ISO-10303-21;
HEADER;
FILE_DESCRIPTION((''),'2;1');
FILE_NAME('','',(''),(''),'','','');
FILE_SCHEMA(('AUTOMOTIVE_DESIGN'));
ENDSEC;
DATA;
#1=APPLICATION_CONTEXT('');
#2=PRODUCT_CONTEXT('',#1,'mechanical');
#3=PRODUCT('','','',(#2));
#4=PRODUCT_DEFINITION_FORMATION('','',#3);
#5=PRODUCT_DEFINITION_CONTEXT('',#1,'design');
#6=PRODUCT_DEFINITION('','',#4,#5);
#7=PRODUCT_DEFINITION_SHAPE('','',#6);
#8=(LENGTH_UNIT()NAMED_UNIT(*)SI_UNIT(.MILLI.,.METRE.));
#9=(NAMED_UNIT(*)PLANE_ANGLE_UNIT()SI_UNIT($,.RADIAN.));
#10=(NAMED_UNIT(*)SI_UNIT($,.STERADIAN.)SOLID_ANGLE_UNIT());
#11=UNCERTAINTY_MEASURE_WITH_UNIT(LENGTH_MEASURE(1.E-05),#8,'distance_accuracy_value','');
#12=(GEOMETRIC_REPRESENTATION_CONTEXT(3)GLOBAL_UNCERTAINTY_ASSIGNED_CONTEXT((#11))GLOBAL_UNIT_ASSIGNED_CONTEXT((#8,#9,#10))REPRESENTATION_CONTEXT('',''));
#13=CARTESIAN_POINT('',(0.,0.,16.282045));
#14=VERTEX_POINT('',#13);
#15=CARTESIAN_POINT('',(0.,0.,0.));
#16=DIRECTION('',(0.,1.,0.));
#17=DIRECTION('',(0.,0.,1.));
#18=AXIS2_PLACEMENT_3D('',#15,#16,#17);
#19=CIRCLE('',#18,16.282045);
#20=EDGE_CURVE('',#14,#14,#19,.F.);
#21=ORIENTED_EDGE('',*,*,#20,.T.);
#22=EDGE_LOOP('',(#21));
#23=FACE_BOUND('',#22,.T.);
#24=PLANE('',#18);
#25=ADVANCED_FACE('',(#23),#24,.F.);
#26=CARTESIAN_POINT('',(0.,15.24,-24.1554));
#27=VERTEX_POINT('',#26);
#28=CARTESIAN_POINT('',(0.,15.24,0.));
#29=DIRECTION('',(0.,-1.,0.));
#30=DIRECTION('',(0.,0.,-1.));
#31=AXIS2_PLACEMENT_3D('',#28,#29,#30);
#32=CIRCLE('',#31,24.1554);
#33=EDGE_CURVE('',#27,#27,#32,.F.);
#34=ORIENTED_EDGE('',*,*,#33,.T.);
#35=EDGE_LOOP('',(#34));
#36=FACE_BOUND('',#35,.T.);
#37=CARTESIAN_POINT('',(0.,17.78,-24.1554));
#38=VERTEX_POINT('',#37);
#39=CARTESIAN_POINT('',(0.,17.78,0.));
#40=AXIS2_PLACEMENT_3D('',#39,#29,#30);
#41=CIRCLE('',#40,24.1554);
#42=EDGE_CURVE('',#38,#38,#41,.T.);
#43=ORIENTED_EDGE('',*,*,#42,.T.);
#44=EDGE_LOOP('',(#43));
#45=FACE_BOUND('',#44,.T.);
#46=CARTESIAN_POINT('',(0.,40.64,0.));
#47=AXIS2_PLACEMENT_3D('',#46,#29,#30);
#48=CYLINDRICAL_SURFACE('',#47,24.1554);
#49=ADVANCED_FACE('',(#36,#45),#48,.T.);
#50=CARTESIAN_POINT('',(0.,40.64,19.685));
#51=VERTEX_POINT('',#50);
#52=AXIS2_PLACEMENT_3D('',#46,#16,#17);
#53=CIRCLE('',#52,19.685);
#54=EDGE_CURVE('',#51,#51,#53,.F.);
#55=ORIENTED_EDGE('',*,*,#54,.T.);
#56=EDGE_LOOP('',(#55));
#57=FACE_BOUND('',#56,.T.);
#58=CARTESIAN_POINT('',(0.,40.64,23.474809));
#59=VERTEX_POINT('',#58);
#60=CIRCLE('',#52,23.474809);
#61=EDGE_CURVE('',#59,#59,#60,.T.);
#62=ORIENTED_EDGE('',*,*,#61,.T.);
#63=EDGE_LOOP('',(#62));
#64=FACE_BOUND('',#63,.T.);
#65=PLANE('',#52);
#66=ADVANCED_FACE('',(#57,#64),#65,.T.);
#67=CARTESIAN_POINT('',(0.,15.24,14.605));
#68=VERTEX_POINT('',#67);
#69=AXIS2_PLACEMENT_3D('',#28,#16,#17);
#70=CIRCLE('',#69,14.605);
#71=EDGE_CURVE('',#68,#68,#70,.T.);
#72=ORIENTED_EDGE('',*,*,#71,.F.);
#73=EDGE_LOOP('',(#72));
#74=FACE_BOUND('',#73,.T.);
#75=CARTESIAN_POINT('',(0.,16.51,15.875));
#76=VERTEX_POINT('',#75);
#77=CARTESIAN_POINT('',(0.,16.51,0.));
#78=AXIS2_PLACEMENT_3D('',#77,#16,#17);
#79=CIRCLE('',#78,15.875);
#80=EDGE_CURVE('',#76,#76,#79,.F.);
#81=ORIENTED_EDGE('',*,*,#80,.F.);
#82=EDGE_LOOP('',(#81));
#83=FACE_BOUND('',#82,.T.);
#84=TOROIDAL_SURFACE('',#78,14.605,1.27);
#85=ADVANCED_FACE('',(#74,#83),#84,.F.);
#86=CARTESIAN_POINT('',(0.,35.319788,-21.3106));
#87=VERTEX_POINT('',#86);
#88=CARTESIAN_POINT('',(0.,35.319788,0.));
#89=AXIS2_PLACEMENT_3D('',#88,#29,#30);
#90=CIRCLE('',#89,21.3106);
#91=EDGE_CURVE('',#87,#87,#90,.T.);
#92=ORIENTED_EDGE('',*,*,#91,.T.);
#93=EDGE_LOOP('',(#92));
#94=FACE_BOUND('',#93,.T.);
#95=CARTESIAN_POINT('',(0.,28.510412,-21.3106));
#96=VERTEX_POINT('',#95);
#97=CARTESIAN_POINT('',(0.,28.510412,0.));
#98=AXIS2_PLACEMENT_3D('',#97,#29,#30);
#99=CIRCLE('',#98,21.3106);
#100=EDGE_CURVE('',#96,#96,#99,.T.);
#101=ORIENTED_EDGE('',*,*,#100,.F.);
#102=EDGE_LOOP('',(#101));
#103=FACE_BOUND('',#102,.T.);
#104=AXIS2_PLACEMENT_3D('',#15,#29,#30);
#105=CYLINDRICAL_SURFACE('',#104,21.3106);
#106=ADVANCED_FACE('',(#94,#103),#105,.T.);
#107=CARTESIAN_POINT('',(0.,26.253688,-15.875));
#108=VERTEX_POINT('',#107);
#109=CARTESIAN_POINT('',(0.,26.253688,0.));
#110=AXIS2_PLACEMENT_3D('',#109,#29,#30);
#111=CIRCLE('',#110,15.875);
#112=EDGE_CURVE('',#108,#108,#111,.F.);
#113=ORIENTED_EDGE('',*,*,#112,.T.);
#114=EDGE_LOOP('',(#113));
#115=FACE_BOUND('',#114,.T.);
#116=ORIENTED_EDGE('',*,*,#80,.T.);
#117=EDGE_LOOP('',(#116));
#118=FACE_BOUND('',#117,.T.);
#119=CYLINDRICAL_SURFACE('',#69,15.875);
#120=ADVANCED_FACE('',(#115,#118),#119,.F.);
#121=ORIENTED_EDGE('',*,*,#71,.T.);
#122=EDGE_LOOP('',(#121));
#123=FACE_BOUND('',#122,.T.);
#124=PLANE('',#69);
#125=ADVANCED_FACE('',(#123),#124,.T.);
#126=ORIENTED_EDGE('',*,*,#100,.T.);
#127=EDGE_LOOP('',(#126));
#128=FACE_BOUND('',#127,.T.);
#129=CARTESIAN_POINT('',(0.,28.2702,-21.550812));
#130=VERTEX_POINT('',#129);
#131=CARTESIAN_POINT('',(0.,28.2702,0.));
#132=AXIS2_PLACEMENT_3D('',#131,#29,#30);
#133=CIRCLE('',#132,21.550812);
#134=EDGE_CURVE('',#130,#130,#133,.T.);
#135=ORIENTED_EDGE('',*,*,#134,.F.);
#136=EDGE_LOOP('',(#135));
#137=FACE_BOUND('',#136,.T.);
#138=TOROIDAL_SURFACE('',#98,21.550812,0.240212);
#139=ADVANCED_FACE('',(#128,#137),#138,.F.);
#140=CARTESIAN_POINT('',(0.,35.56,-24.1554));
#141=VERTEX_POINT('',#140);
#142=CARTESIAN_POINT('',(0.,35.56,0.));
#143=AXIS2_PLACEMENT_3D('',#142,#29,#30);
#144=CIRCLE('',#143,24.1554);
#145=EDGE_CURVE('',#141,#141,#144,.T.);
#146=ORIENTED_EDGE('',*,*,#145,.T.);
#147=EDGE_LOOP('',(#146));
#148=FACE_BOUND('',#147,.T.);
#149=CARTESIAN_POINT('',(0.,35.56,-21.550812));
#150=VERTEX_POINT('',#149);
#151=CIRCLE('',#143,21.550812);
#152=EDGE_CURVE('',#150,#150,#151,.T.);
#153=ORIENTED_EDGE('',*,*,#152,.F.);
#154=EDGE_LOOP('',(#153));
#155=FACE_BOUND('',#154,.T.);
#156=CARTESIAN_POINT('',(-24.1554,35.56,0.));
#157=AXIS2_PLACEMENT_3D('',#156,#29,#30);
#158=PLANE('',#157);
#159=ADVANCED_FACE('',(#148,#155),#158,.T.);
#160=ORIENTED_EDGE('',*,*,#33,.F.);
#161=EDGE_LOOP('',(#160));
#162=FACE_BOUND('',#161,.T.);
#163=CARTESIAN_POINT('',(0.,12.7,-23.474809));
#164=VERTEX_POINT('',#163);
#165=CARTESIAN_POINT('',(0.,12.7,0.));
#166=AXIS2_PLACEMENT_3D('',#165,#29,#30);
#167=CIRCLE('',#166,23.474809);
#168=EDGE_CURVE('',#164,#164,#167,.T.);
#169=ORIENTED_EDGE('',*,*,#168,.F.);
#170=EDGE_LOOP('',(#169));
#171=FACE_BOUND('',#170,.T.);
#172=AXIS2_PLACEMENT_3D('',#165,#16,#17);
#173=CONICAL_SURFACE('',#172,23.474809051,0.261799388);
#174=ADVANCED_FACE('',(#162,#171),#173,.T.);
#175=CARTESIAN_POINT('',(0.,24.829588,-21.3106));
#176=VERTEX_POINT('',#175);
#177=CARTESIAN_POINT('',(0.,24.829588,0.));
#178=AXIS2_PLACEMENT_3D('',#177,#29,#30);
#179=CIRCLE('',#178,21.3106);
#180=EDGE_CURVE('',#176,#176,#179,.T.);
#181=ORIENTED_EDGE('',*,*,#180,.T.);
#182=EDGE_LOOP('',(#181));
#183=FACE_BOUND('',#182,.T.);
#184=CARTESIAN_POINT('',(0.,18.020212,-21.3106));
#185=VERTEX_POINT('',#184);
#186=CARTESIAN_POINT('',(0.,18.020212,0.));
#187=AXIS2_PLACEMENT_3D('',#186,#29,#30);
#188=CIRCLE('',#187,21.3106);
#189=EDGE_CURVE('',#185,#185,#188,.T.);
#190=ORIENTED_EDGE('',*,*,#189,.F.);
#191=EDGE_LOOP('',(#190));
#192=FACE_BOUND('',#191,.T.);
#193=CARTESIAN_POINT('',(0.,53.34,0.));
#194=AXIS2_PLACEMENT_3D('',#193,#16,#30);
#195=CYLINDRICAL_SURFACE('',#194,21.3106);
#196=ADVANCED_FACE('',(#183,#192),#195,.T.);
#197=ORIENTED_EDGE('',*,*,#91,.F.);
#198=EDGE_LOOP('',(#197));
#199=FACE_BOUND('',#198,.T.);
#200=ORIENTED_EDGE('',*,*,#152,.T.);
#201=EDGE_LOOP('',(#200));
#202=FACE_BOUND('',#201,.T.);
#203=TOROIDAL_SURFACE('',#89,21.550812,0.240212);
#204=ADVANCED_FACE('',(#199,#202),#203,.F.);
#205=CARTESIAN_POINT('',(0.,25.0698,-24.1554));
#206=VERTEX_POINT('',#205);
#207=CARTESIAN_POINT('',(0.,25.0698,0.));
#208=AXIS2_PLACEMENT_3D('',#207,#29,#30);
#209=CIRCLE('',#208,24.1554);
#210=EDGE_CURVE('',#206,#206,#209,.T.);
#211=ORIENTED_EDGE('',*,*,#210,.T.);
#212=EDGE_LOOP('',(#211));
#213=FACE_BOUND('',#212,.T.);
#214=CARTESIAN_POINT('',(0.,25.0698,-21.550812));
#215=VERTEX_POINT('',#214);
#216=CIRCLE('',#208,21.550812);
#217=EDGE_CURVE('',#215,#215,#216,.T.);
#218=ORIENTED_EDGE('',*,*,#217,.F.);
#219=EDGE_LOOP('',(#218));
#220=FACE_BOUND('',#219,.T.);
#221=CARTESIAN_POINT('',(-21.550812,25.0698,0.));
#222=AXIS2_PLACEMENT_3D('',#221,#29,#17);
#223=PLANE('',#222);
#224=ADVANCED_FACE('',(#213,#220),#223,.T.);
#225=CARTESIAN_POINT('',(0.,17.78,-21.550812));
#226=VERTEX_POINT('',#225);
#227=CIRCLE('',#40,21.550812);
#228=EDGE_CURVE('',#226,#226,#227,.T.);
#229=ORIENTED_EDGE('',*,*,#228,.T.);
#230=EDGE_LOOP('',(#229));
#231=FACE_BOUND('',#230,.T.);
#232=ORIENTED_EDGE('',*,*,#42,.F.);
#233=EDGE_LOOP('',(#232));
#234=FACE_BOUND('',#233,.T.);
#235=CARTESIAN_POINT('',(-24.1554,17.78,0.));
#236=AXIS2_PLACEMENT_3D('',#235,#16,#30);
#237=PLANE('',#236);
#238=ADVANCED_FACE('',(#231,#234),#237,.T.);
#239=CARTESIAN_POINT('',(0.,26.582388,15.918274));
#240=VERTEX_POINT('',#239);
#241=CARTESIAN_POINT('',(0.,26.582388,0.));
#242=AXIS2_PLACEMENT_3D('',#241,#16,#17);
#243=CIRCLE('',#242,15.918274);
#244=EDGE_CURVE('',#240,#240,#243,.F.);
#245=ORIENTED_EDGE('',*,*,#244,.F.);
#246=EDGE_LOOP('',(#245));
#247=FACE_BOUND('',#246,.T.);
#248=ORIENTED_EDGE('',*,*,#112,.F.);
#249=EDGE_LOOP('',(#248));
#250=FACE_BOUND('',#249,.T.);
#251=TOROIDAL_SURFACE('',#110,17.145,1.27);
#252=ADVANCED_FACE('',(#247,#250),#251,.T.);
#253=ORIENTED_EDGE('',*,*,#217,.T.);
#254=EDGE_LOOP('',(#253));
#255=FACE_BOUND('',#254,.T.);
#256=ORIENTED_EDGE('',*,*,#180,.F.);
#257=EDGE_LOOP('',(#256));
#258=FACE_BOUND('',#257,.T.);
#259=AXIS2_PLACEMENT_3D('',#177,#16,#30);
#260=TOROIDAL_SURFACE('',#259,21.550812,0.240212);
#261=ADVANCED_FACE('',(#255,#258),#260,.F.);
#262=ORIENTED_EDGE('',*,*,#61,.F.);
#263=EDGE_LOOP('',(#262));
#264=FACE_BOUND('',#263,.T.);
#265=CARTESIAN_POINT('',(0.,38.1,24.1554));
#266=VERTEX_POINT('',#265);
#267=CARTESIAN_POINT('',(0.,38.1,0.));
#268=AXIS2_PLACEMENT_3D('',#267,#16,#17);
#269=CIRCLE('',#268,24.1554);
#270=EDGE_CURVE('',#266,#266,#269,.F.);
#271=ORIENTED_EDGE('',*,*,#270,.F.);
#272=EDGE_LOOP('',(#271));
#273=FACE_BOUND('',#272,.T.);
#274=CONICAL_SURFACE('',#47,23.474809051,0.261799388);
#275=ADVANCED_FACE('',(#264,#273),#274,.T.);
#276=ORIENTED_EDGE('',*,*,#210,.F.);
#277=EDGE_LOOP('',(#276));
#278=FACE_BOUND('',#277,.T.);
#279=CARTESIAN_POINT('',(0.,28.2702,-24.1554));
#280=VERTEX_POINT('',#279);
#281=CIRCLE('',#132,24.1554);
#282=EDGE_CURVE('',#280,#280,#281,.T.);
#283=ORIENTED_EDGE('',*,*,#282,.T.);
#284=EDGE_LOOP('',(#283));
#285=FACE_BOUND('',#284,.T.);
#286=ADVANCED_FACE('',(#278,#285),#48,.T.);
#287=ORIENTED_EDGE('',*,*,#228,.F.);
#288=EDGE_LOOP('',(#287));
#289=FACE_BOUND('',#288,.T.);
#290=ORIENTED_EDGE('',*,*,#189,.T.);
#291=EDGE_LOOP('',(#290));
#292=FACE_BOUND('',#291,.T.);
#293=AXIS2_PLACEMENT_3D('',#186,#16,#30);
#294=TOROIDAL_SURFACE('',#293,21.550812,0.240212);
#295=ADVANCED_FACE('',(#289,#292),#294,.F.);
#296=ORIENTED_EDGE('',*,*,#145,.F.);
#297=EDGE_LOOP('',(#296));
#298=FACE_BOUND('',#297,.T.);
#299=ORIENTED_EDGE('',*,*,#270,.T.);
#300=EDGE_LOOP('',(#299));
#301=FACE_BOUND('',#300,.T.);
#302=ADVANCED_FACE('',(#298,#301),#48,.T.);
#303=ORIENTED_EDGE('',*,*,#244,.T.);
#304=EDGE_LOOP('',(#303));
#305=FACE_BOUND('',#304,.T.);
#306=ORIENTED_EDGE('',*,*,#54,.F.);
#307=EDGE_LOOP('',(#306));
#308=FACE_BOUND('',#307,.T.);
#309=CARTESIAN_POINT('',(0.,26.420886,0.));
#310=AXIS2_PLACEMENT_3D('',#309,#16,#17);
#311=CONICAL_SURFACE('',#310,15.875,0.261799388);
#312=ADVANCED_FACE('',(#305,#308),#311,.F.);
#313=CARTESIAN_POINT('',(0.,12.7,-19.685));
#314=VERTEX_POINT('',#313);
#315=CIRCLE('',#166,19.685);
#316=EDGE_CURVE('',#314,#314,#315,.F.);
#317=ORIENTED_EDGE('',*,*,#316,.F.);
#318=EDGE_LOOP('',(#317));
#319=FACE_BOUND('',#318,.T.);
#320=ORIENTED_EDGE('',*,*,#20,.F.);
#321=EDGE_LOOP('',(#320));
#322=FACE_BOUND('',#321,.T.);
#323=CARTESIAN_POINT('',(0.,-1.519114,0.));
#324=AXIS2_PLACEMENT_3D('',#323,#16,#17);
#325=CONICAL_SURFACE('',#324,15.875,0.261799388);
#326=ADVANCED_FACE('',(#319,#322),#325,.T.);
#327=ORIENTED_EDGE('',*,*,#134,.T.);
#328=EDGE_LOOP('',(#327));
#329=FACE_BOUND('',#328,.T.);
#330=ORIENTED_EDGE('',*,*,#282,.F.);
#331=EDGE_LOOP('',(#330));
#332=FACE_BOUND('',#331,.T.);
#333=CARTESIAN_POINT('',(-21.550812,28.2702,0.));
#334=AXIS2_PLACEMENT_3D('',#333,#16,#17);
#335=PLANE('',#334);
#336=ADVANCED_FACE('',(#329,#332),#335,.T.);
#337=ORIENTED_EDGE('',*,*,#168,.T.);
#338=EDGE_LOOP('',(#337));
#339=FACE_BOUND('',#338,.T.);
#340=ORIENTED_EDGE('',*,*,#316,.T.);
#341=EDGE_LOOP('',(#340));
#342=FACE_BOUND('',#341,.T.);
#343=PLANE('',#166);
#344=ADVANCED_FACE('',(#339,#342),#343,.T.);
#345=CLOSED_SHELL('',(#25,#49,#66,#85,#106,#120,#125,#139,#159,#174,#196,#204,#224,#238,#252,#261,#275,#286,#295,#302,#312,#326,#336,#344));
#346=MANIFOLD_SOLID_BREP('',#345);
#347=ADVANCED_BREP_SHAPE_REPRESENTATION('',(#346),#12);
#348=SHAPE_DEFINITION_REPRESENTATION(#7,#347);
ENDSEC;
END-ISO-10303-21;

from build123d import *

# Parameters (mm, degrees)
SKETCH1_R                 = 24.1554
BODY_DEPTH                = 40.64
SKETCH2_R                 = 15.875
LIGHTENING_HOLE_DEPTH     = 25.4
INSTALL_CHAMFER_SIZE      = 2.54
INSTALL_CHAMFER_SIZE2     = 0.680590949
PROP_CHAMFER_SIZE         = 3.81
PROP_CHAMFER_SIZE2        = 14.219113577
SKETCH54_R                = 24.1554
SKETCH54_R_2              = 15.875
CONFORM_CUT_DEPTH         = 12.7
BOTTOM_PRESS_DRAFT_SIZE   = 3.81
BOTTOM_PRESS_DRAFT_SIZE_2 = 14.219113577
EDGE_BREAKS_R             = 1.27
INSTALL_CHAMFER_2_SIZE    = 2.54
INSTALL_CHAMFER_2_SIZE2   = 0.680590949


with BuildPart() as part:
    # Sketch1 → body (new body)
    with BuildSketch(Plane(origin=(0, 0, 0), x_dir=(1, 0, 0), z_dir=(0, 1, 0))):
        with Locations(Location((0, 0, 0), (0, 0, 270))):
            Circle(SKETCH1_R)
    extrude(amount=BODY_DEPTH)

    # Sketch2 → lightening hole (cut)
    with BuildSketch(Plane(origin=(0, 40.64, 0), x_dir=(1, 0, 0), z_dir=(0, 1, 0))):
        with Locations(Location((0, 0, 0), (0, 0, 270))):
            Circle(SKETCH2_R)
    extrude(amount=-LIGHTENING_HOLE_DEPTH, mode=Mode.SUBTRACT)

    # main-o-ring → o-ring-main (with backup rings) (revolve, cut)
    with BuildSketch(Plane.XY, mode=Mode.PRIVATE) as o_ring_main_with_backup_rings_sk:
        with BuildLine():
            Line((-24.1554, 35.56), (-24.1554, 28.2702))
            Line((-24.1554, 28.2702), (-21.550812385, 28.2702))
            ThreePointArc((-21.550812385, 28.2702), (-21.380956579, 28.340556579), (-21.3106, 28.510412385))
            Line((-21.3106, 28.510412385), (-21.3106, 35.319787615))
            ThreePointArc((-21.3106, 35.319787615), (-21.380956579, 35.489643421), (-21.550812385, 35.56))
            Line((-21.550812385, 35.56), (-24.1554, 35.56))
        make_face()
    o_ring_main_with_backup_rings = revolve(o_ring_main_with_backup_rings_sk.sketch.rotate(Axis((0, 0, 0), (0, 1, 0)), 270), axis=Axis((0, 0, 0), (0, 1, 0)), mode=Mode.SUBTRACT)

    # install-chamfer
    install_chamfer_edges = [part.edges().sort_by_distance(p)[0] for p in [
        (0, 40.64, -24.1554),
    ]]
    install_chamfer_side = [part.faces().sort_by_distance(p)[0] for p in [
        (0, 38.1, -24.1554),
    ]]
    chamfer(install_chamfer_edges, length=INSTALL_CHAMFER_SIZE, length2=INSTALL_CHAMFER_SIZE2, reference=install_chamfer_side[0])

    # prop-chamfer
    prop_chamfer_edges = [part.edges().sort_by_distance(p)[0] for p in [
        (0, 40.64, -15.875),
    ]]
    prop_chamfer_side = [part.faces().sort_by_distance(p)[0] for p in [
        (0, 40.64, -22.810841185),
    ]]
    chamfer(prop_chamfer_edges, length=PROP_CHAMFER_SIZE, length2=PROP_CHAMFER_SIZE2, reference=prop_chamfer_side[0])

    # Top-Bottom Symmetry: o-ring-main (with backup rings) across plane
    add(o_ring_main_with_backup_rings.mirror(Plane.ZX.offset(26.67)), mode=Mode.SUBTRACT)

    # Sketch54 → conform-cut (cut)
    with BuildSketch(Plane.XZ):
        with Locations(Location((0, 0, 0), (0, 0, 270))):
            Circle(SKETCH54_R)
        with Locations(Location((0, 0, 0), (0, 0, 90))):
            Circle(SKETCH54_R_2, mode=Mode.SUBTRACT)
    extrude(amount=-CONFORM_CUT_DEPTH, mode=Mode.SUBTRACT)

    # bottom-press-draft
    # the kernel refuses this chamfer: 14.219113577, 3.81 mm, written as the material it adds along each edge
    with BuildSketch(Plane(origin=(0, 12.7, 0), x_dir=(0, 0, 1), z_dir=(1, 0, 0))) as bottom_press_draft_piece_1_section:
        Polygon((15.875 + BOTTOM_PRESS_DRAFT_SIZE, 0), (15.875, BOTTOM_PRESS_DRAFT_SIZE_2), (15.875, 0), align=None)
    bottom_press_draft_piece_1 = revolve(axis=Axis((0, 12.7, 0), (0, -1, 0)), mode=Mode.PRIVATE)
    bottom_press_draft_piece_1 = split(bottom_press_draft_piece_1, bisect_by=Plane(origin=(0, 0, -17.911519777), z_dir=(0, 1, 0)), keep=Keep.TOP, mode=Mode.PRIVATE)
    add(bottom_press_draft_piece_1)

    # edge-breaks
    edge_breaks_edges = [part.edges().sort_by_distance(p)[0] for p in [
        (0, 26.420886423, -15.875),
        (0, 15.24, -15.875),
    ]]
    fillet(edge_breaks_edges, radius=EDGE_BREAKS_R)

    # install-chamfer-2
    install_chamfer_2_edges = [part.edges().sort_by_distance(p)[0] for p in [
        (0, 12.7, -24.1554),
    ]]
    install_chamfer_2_side = [part.faces().sort_by_distance(p)[0] for p in [
        (0, 15.24, -24.1554),
    ]]
    chamfer(install_chamfer_2_edges, length=INSTALL_CHAMFER_2_SIZE, length2=INSTALL_CHAMFER_2_SIZE2, reference=install_chamfer_2_side[0])


solid = part.part
